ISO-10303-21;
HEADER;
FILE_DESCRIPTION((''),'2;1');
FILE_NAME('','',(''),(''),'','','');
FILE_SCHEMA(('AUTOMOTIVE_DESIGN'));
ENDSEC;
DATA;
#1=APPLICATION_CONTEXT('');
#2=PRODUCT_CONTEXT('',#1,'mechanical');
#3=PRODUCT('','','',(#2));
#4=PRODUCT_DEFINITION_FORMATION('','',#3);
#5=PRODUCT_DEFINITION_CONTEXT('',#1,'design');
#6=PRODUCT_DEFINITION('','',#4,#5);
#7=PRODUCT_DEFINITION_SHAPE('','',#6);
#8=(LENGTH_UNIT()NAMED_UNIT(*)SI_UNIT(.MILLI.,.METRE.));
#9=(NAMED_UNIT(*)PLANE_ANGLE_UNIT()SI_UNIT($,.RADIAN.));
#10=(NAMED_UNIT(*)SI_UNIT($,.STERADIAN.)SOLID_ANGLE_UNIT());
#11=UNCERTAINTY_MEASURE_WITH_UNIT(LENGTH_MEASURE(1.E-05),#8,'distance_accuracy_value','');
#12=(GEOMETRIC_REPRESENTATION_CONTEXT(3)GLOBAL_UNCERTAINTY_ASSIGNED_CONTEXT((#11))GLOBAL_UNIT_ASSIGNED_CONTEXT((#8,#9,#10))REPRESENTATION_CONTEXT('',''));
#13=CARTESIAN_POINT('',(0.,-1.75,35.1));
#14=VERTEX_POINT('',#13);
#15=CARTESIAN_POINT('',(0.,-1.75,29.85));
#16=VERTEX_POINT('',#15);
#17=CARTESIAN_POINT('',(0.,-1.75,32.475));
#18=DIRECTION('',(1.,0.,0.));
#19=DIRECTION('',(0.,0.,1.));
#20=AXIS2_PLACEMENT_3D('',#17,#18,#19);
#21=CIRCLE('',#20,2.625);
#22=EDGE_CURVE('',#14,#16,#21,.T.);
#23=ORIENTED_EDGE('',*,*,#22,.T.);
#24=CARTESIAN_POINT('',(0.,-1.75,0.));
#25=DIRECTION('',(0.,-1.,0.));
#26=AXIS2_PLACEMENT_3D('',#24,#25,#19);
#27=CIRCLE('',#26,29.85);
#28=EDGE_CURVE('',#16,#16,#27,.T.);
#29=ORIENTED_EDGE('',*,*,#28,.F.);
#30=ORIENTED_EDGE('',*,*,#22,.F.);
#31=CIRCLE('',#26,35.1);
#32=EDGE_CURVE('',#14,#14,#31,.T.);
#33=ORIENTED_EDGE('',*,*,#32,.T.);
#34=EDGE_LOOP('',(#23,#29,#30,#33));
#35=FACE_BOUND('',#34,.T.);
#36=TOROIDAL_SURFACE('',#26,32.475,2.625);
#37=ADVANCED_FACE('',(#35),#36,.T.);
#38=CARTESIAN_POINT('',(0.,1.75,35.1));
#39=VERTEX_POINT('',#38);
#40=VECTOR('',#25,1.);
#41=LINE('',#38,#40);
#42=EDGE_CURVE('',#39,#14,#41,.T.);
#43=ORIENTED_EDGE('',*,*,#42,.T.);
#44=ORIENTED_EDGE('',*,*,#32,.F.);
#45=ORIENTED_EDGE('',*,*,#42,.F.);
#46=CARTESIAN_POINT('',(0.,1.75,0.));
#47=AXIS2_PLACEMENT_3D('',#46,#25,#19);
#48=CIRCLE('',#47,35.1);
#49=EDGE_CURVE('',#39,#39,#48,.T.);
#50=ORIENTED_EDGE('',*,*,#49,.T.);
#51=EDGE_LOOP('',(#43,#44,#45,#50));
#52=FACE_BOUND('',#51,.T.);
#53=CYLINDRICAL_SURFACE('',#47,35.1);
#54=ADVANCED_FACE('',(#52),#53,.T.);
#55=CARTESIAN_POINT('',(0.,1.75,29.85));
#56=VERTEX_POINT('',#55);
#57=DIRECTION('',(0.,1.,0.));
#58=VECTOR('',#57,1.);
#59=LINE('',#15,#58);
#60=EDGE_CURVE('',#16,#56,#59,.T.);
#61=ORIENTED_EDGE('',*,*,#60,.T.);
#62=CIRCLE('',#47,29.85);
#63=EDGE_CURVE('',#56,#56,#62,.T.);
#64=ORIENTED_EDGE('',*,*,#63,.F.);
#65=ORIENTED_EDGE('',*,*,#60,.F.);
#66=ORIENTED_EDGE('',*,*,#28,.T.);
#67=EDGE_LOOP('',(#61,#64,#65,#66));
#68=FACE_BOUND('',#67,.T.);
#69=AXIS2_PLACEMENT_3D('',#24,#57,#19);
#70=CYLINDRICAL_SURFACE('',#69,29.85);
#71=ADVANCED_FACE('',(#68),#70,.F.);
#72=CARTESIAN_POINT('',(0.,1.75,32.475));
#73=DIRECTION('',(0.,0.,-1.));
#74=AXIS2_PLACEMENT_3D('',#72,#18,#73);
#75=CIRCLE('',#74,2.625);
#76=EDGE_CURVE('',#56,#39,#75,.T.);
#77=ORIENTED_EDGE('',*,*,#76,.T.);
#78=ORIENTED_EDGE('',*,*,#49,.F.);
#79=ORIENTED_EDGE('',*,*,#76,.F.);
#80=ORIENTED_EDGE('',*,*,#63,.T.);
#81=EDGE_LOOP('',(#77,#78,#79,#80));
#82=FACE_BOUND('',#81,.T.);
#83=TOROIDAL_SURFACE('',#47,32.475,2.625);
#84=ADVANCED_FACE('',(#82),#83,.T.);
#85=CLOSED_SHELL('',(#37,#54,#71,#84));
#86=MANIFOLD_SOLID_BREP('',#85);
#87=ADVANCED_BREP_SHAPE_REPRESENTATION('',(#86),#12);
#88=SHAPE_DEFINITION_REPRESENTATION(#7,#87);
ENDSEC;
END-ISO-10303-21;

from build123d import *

# Parameters (mm, degrees)
F5_DEPTH = 6


# Not quite as in the source:
# - a feature of the source that left no trace in its solid (it failed there, or was rolled back) is left out


with BuildPart() as f1:
    # F0 (on Right) → F1 (revolve)
    with BuildSketch(Plane.YZ):
        with BuildLine():
            ThreePointArc((1.75, 29.85), (4.375, 32.475), (1.75, 35.1))
            Line((1.75, 35.1), (-1.75, 35.1))
            ThreePointArc((-1.75, 35.1), (-4.375, 32.475), (-1.75, 29.85))
            Line((-1.75, 29.85), (1.75, 29.85))
        make_face()
    revolve(axis=Axis((0, -4.6846177429, 0), (0, -1, 0)))


with BuildPart() as f3:
    # F2 (on Right) → F3 (revolve)
    with BuildSketch(Plane.YZ):
        with BuildLine():
            ThreePointArc((4.3570501582, 32.1685453172), (3.4944456795, 30.5134867395), (1.75, 29.85))
            Line((1.75, 29.85), (-1.75, 29.85))
            ThreePointArc((-1.75, 29.85), (-3.6061553006, 30.6188446994), (-4.375, 32.475))
            Line((-4.375, 32.475), (-4.375, 27.1685775369))
            Line((-4.375, 27.1685775369), (4.375, 27.1685775369))
            Line((4.375, 27.1685775369), (4.3570501582, 32.1685453172))
        make_face()
    revolve(axis=Axis((0, -6.0206142662, 0), (0, -1, 0)))

    # F4 (on Front) → F5 (join, symmetric)
    with BuildSketch(Plane.XZ):
        with BuildLine():
            ThreePointArc((-0.8, -1.805720078), (-1.9541006025, -0.286558607), (-1.2847665158, 1.5))
            Line((-1.2847665158, 1.5), (1.2847665158, 1.5))
            ThreePointArc((1.2847665158, 1.5), (1.9541006025, -0.286558607), (0.8, -1.805720078))
            Line((0.8, -1.805720078), (0.8, -6.9541354603))
            ThreePointArc((0.8, -6.9541354603), (2.1957679989, -6.6466986463), (3.5, -6.0621778265))
            ThreePointArc((3.5, -6.0621778265), (3.694735219, -5.9454967548), (3.8855844605, -5.8225624428))
            ThreePointArc((3.8855844605, -5.8225624428), (3.8880716888, -5.8324992461), (3.890563158, -5.8424349868))
            ThreePointArc((3.890563158, -5.8424349868), (8.500978981, -15.0837914383), (16.568096168, -21.5320643401))
            ThreePointArc((16.568096168, -21.5320643401), (18.1794560768, -20.1900713752), (19.6825117076, -18.727795873))
            ThreePointArc((19.6825117076, -18.727795873), (11.7812454852, -13.0384635672), (7.4660124048, -4.3105042717))
            ThreePointArc((7.4660124048, -4.3105042717), (17.1822634181, -3.6836260948), (26.0600028367, -7.6816572125))
            ThreePointArc((26.0600028367, -7.6816572125), (26.5748427535, -5.6488351019), (26.9313627985, -3.5823600038))
            ThreePointArc((26.9313627985, -3.5823600038), (17.3134360615, 0.1798319646), (7.0049786976, -0.4481090365))
            ThreePointArc((7.0049786976, -0.4481090365), (6.9951283591, -0.4509192312), (6.9852792208, -0.4537336299))
            ThreePointArc((6.9852792208, -0.4537336299), (6.9963188373, -0.2269861825), (7, 0))
            ThreePointArc((7, 0), (6.0621778265, 3.5), (3.5, 6.0621778265))
            ThreePointArc((3.5, 6.0621778265), (3.3015836183, 6.1724829373), (3.0996947604, 6.2762960727))
            ThreePointArc((3.0996947604, 6.2762960727), (3.1070566702, 6.2834184773), (3.1144155395, 6.2905440233))
            ThreePointArc((3.1144155395, 6.2905440233), (8.8124570805, 14.9039594738), (10.3632666305, 25.1144243439))
            ThreePointArc((10.3632666305, 25.1144243439), (8.3953866767, 25.838906477), (6.3774911291, 26.4094530856))
            ThreePointArc((6.3774911291, 26.4094530856), (5.4010179329, 16.722089662), (0, 8.6210085433))
            ThreePointArc((0, 8.6210085433), (-5.4010179329, 16.722089662), (-6.3774911291, 26.4094530856))
            ThreePointArc((-6.3774911291, 26.4094530856), (-8.3953866767, 25.838906477), (-10.3632666305, 25.1144243439))
            ThreePointArc((-10.3632666305, 25.1144243439), (-8.8124570805, 14.9039594738), (-3.1144155395, 6.2905440233))
            ThreePointArc((-3.1144155395, 6.2905440233), (-3.1070566702, 6.2834184773), (-3.0996947604, 6.2762960727))
            ThreePointArc((-3.0996947604, 6.2762960727), (-3.3015836183, 6.1724829373), (-3.5, 6.0621778265))
            ThreePointArc((-3.5, 6.0621778265), (-6.0621778265, 3.5), (-7, 0))
            ThreePointArc((-7, 0), (-6.9963188373, -0.2269861825), (-6.9852792208, -0.4537336299))
            ThreePointArc((-6.9852792208, -0.4537336299), (-6.9951283591, -0.4509192312), (-7.0049786976, -0.4481090365))
            ThreePointArc((-7.0049786976, -0.4481090365), (-17.3134360615, 0.1798319646), (-26.9313627985, -3.5823600038))
            ThreePointArc((-26.9313627985, -3.5823600038), (-26.5748427535, -5.6488351019), (-26.0600028367, -7.6816572125))
            ThreePointArc((-26.0600028367, -7.6816572125), (-17.1822634181, -3.6836260948), (-7.4660124048, -4.3105042717))
            ThreePointArc((-7.4660124048, -4.3105042717), (-11.7812454852, -13.0384635672), (-19.6825117076, -18.727795873))
            ThreePointArc((-19.6825117076, -18.727795873), (-18.1794560768, -20.1900713752), (-16.568096168, -21.5320643401))
            ThreePointArc((-16.568096168, -21.5320643401), (-8.500978981, -15.0837914383), (-3.890563158, -5.8424349868))
            ThreePointArc((-3.890563158, -5.8424349868), (-3.8880716888, -5.8324992461), (-3.8855844605, -5.8225624428))
            ThreePointArc((-3.8855844605, -5.8225624428), (-3.694735219, -5.9454967548), (-3.5, -6.0621778265))
            ThreePointArc((-3.5, -6.0621778265), (-2.1957679989, -6.6466986463), (-0.8, -6.9541354603))
            Line((-0.8, -6.9541354603), (-0.8, -1.805720078))
        make_face()
    extrude(amount=F5_DEPTH, both=True)

    # F6 (on Right) → F7 (revolve, cut)
    with BuildSketch(Plane.YZ):
        with BuildLine():
            Line((-13.0535820499, 2.701601783), (-6, 4))
            ThreePointArc((-6, 4), (-1.8810208663, 15.3523786055), (-4.375, 27.1685775369))
            Line((-4.375, 27.1685775369), (-11.726167053, 27.1685775369))
            Line((-11.726167053, 27.1685775369), (-13.0535820499, 2.701601783))
        make_face()
        with BuildLine():
            Line((12.8782450573, 27.7328483518), (4.375, 27.1685775369))
            ThreePointArc((4.375, 27.1685775369), (1.8810208663, 15.3523786055), (6, 4))
            Line((6, 4), (14.3638671536, 5.3453556511))
            Line((14.3638671536, 5.3453556511), (12.8782450573, 27.7328483518))
        make_face()
    revolve(axis=Axis((0, -4.9612242728, 0), (0, 1, 0)), mode=Mode.SUBTRACT)


solid = f1.part
